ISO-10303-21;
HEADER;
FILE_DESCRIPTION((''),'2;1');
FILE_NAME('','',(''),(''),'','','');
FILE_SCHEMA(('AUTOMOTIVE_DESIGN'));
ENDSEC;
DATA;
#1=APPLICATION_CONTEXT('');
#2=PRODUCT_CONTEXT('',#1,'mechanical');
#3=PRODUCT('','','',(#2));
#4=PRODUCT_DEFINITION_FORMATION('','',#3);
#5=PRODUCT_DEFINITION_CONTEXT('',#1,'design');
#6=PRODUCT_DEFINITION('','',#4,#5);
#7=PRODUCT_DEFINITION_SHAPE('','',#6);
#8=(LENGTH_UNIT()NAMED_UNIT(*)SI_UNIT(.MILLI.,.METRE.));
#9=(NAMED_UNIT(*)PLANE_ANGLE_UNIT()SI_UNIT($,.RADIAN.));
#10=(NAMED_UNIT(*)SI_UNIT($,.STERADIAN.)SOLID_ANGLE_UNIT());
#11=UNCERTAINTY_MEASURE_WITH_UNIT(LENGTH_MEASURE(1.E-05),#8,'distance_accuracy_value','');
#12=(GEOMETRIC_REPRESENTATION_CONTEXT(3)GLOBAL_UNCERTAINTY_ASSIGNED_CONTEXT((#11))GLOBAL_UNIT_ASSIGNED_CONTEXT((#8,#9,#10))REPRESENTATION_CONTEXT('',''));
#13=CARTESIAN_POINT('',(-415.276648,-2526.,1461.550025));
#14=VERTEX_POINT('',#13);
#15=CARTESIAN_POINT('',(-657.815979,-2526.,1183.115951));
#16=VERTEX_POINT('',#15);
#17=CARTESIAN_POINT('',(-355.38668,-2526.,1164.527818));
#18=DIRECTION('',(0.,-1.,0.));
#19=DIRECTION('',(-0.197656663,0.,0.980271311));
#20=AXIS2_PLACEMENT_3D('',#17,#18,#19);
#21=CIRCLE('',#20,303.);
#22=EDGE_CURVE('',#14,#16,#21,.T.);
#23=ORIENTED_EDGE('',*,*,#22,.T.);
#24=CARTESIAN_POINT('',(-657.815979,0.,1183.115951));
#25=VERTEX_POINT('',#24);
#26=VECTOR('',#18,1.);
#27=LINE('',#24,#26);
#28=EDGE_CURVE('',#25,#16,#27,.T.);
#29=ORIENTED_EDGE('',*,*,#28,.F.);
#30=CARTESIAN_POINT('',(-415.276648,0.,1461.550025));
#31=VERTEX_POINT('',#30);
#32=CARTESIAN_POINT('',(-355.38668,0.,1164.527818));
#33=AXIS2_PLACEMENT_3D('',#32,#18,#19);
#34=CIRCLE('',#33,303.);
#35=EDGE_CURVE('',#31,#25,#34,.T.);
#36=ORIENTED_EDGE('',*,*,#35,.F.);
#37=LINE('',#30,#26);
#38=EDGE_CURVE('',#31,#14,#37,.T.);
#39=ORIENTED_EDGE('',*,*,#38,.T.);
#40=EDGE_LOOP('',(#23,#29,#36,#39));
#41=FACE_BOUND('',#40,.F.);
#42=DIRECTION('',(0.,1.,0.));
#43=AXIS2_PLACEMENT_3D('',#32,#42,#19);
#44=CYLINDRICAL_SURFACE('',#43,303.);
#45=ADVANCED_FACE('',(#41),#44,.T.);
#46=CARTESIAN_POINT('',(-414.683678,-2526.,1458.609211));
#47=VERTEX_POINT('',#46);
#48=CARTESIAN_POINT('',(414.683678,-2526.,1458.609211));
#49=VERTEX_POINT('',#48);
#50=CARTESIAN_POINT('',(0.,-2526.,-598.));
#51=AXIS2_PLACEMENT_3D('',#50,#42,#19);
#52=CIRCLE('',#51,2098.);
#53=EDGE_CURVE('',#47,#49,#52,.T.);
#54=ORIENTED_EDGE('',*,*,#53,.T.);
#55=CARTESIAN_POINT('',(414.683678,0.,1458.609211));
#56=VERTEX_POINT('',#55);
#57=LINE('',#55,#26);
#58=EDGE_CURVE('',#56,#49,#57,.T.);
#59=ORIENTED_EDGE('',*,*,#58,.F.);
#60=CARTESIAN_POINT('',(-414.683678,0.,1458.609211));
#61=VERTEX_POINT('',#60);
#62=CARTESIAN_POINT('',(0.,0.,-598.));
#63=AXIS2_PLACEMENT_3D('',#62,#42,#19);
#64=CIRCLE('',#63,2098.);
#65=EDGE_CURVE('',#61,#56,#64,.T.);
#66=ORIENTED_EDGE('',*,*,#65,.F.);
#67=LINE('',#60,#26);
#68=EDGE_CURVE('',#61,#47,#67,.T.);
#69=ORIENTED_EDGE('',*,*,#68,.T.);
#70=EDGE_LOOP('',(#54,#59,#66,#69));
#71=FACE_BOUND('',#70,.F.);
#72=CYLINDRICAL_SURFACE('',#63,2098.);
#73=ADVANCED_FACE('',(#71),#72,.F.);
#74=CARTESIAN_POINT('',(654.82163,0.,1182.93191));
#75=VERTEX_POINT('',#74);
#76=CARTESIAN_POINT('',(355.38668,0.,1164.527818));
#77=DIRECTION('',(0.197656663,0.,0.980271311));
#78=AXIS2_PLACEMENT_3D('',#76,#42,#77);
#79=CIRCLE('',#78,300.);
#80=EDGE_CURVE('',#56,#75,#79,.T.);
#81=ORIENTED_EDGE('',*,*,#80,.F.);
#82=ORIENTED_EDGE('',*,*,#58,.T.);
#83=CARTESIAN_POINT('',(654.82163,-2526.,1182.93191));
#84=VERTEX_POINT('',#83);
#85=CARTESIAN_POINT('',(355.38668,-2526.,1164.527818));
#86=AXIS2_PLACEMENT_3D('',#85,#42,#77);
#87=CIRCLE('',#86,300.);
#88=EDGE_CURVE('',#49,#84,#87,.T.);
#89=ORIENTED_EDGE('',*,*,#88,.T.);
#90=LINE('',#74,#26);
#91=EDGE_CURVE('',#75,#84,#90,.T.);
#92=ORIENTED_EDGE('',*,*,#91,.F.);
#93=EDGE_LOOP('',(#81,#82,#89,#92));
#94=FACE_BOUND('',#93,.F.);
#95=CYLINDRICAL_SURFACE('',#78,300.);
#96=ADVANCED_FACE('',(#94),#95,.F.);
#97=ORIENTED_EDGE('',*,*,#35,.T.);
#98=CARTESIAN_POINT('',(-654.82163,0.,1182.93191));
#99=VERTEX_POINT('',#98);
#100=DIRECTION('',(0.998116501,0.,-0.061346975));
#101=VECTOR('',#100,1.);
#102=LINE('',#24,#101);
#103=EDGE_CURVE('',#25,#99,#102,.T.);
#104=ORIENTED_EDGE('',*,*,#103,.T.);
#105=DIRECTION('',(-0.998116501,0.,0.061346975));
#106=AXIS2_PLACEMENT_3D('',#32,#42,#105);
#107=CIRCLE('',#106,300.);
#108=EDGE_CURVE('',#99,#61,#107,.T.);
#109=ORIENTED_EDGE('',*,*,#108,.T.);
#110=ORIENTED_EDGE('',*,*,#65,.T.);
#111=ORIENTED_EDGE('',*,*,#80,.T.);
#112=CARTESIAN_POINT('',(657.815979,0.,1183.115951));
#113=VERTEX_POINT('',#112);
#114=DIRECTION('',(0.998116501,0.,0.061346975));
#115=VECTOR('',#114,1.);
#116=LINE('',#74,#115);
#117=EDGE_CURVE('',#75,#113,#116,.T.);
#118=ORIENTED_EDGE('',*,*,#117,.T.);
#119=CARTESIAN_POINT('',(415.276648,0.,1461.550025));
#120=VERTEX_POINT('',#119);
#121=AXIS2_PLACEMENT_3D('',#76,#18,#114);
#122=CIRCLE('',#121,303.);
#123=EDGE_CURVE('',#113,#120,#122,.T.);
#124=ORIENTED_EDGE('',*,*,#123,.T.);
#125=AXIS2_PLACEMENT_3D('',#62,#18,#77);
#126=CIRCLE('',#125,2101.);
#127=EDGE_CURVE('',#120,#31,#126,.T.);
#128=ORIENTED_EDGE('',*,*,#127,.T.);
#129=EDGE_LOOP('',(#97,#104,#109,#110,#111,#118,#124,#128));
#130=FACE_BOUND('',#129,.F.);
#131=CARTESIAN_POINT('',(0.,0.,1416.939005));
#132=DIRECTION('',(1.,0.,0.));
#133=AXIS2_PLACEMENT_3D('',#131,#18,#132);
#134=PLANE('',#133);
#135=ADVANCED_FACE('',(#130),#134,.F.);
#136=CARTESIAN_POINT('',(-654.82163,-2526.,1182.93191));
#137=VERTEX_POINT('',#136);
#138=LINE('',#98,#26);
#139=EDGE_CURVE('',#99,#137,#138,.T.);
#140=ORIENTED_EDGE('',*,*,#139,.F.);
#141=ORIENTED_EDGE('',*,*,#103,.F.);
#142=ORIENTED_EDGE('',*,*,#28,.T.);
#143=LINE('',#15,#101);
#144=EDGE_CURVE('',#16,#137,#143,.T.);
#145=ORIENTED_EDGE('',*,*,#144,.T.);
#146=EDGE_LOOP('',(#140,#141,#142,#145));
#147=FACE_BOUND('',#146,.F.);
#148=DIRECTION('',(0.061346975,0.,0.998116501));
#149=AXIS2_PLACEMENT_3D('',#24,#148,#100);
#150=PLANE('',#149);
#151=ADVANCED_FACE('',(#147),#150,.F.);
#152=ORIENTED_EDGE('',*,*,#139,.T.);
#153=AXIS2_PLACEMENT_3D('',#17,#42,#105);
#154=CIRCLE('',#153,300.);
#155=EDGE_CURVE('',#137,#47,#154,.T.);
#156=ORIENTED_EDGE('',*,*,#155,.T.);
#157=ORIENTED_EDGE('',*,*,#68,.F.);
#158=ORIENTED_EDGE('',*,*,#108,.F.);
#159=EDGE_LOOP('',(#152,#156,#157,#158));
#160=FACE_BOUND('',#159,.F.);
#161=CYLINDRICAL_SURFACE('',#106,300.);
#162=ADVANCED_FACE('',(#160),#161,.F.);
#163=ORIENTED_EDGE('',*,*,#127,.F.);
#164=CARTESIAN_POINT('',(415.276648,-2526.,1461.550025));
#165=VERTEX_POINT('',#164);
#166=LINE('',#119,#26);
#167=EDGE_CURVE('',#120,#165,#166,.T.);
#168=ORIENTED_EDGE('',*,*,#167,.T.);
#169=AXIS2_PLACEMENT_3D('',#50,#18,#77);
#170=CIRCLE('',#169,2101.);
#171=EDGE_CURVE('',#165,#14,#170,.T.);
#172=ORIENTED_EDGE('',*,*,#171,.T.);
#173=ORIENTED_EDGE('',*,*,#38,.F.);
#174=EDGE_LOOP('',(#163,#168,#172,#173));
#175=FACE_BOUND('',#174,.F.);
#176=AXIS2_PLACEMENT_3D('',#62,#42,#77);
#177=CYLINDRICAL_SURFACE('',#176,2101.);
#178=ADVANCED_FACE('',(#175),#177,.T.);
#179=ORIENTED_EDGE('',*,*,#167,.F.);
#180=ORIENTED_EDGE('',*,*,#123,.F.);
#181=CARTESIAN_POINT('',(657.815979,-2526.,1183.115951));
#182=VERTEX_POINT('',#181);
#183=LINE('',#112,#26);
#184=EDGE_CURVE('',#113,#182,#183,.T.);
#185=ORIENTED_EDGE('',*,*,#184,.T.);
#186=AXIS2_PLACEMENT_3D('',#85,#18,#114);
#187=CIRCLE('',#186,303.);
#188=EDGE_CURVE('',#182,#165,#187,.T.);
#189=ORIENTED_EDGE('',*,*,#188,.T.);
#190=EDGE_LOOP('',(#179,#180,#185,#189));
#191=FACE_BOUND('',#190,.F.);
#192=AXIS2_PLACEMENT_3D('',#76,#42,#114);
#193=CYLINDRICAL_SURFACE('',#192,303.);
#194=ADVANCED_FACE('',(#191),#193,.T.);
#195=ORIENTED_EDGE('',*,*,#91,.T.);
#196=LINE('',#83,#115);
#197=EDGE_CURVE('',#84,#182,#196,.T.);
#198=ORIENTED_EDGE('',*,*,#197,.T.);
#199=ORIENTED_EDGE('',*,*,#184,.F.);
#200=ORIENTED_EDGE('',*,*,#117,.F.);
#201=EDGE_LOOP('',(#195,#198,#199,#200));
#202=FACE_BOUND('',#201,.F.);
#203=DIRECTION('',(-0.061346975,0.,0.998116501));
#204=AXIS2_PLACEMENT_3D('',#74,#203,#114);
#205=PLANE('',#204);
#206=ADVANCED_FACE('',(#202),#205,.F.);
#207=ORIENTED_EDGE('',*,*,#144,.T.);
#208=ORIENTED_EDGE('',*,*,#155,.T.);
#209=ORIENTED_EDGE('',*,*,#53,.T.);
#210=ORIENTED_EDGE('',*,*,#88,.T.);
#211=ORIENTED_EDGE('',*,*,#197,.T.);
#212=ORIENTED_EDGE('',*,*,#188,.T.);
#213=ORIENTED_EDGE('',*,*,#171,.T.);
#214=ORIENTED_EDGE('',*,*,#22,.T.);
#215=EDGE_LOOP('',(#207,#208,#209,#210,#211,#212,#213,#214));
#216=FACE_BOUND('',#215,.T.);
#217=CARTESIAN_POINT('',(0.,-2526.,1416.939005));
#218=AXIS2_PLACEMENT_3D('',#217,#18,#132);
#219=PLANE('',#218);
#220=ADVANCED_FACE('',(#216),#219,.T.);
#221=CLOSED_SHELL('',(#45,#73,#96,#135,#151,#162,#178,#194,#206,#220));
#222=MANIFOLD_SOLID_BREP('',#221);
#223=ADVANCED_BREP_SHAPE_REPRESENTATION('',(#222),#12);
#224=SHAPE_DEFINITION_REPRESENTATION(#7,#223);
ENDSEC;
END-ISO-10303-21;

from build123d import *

# Parameters (mm, degrees)
F1_DEPTH = 2526


with BuildPart() as f1:
    # F0 (on Front) → F1 (new body)
    with BuildSketch(Plane.XZ):
        with BuildLine():
            ThreePointArc((-414.6836784295, 1458.609211018), (0, 1500), (414.6836784295, 1458.609211018))
            ThreePointArc((414.6836784295, 1458.609211018), (581.5981876067, 1361.576932454), (654.8216297668, 1182.9319102019))
            Line((654.8216297668, 1182.9319102019), (657.8159792684, 1183.1159511275))
            ThreePointArc((657.8159792684, 1183.1159511275), (583.8603026867, 1363.5474236021), (415.2766484177, 1461.5500249518))
            ThreePointArc((415.2766484177, 1461.5500249518), (0, 1503), (-415.2766484177, 1461.5500249518))
            ThreePointArc((-415.2766484177, 1461.5500249518), (-583.8603026867, 1363.5474236021), (-657.8159792684, 1183.1159511275))
            Line((-657.8159792684, 1183.1159511275), (-654.8216297668, 1182.9319102019))
            ThreePointArc((-654.8216297668, 1182.9319102019), (-581.5981876067, 1361.576932454), (-414.6836784295, 1458.609211018))
        make_face()
    extrude(amount=F1_DEPTH)


solid = f1.part
